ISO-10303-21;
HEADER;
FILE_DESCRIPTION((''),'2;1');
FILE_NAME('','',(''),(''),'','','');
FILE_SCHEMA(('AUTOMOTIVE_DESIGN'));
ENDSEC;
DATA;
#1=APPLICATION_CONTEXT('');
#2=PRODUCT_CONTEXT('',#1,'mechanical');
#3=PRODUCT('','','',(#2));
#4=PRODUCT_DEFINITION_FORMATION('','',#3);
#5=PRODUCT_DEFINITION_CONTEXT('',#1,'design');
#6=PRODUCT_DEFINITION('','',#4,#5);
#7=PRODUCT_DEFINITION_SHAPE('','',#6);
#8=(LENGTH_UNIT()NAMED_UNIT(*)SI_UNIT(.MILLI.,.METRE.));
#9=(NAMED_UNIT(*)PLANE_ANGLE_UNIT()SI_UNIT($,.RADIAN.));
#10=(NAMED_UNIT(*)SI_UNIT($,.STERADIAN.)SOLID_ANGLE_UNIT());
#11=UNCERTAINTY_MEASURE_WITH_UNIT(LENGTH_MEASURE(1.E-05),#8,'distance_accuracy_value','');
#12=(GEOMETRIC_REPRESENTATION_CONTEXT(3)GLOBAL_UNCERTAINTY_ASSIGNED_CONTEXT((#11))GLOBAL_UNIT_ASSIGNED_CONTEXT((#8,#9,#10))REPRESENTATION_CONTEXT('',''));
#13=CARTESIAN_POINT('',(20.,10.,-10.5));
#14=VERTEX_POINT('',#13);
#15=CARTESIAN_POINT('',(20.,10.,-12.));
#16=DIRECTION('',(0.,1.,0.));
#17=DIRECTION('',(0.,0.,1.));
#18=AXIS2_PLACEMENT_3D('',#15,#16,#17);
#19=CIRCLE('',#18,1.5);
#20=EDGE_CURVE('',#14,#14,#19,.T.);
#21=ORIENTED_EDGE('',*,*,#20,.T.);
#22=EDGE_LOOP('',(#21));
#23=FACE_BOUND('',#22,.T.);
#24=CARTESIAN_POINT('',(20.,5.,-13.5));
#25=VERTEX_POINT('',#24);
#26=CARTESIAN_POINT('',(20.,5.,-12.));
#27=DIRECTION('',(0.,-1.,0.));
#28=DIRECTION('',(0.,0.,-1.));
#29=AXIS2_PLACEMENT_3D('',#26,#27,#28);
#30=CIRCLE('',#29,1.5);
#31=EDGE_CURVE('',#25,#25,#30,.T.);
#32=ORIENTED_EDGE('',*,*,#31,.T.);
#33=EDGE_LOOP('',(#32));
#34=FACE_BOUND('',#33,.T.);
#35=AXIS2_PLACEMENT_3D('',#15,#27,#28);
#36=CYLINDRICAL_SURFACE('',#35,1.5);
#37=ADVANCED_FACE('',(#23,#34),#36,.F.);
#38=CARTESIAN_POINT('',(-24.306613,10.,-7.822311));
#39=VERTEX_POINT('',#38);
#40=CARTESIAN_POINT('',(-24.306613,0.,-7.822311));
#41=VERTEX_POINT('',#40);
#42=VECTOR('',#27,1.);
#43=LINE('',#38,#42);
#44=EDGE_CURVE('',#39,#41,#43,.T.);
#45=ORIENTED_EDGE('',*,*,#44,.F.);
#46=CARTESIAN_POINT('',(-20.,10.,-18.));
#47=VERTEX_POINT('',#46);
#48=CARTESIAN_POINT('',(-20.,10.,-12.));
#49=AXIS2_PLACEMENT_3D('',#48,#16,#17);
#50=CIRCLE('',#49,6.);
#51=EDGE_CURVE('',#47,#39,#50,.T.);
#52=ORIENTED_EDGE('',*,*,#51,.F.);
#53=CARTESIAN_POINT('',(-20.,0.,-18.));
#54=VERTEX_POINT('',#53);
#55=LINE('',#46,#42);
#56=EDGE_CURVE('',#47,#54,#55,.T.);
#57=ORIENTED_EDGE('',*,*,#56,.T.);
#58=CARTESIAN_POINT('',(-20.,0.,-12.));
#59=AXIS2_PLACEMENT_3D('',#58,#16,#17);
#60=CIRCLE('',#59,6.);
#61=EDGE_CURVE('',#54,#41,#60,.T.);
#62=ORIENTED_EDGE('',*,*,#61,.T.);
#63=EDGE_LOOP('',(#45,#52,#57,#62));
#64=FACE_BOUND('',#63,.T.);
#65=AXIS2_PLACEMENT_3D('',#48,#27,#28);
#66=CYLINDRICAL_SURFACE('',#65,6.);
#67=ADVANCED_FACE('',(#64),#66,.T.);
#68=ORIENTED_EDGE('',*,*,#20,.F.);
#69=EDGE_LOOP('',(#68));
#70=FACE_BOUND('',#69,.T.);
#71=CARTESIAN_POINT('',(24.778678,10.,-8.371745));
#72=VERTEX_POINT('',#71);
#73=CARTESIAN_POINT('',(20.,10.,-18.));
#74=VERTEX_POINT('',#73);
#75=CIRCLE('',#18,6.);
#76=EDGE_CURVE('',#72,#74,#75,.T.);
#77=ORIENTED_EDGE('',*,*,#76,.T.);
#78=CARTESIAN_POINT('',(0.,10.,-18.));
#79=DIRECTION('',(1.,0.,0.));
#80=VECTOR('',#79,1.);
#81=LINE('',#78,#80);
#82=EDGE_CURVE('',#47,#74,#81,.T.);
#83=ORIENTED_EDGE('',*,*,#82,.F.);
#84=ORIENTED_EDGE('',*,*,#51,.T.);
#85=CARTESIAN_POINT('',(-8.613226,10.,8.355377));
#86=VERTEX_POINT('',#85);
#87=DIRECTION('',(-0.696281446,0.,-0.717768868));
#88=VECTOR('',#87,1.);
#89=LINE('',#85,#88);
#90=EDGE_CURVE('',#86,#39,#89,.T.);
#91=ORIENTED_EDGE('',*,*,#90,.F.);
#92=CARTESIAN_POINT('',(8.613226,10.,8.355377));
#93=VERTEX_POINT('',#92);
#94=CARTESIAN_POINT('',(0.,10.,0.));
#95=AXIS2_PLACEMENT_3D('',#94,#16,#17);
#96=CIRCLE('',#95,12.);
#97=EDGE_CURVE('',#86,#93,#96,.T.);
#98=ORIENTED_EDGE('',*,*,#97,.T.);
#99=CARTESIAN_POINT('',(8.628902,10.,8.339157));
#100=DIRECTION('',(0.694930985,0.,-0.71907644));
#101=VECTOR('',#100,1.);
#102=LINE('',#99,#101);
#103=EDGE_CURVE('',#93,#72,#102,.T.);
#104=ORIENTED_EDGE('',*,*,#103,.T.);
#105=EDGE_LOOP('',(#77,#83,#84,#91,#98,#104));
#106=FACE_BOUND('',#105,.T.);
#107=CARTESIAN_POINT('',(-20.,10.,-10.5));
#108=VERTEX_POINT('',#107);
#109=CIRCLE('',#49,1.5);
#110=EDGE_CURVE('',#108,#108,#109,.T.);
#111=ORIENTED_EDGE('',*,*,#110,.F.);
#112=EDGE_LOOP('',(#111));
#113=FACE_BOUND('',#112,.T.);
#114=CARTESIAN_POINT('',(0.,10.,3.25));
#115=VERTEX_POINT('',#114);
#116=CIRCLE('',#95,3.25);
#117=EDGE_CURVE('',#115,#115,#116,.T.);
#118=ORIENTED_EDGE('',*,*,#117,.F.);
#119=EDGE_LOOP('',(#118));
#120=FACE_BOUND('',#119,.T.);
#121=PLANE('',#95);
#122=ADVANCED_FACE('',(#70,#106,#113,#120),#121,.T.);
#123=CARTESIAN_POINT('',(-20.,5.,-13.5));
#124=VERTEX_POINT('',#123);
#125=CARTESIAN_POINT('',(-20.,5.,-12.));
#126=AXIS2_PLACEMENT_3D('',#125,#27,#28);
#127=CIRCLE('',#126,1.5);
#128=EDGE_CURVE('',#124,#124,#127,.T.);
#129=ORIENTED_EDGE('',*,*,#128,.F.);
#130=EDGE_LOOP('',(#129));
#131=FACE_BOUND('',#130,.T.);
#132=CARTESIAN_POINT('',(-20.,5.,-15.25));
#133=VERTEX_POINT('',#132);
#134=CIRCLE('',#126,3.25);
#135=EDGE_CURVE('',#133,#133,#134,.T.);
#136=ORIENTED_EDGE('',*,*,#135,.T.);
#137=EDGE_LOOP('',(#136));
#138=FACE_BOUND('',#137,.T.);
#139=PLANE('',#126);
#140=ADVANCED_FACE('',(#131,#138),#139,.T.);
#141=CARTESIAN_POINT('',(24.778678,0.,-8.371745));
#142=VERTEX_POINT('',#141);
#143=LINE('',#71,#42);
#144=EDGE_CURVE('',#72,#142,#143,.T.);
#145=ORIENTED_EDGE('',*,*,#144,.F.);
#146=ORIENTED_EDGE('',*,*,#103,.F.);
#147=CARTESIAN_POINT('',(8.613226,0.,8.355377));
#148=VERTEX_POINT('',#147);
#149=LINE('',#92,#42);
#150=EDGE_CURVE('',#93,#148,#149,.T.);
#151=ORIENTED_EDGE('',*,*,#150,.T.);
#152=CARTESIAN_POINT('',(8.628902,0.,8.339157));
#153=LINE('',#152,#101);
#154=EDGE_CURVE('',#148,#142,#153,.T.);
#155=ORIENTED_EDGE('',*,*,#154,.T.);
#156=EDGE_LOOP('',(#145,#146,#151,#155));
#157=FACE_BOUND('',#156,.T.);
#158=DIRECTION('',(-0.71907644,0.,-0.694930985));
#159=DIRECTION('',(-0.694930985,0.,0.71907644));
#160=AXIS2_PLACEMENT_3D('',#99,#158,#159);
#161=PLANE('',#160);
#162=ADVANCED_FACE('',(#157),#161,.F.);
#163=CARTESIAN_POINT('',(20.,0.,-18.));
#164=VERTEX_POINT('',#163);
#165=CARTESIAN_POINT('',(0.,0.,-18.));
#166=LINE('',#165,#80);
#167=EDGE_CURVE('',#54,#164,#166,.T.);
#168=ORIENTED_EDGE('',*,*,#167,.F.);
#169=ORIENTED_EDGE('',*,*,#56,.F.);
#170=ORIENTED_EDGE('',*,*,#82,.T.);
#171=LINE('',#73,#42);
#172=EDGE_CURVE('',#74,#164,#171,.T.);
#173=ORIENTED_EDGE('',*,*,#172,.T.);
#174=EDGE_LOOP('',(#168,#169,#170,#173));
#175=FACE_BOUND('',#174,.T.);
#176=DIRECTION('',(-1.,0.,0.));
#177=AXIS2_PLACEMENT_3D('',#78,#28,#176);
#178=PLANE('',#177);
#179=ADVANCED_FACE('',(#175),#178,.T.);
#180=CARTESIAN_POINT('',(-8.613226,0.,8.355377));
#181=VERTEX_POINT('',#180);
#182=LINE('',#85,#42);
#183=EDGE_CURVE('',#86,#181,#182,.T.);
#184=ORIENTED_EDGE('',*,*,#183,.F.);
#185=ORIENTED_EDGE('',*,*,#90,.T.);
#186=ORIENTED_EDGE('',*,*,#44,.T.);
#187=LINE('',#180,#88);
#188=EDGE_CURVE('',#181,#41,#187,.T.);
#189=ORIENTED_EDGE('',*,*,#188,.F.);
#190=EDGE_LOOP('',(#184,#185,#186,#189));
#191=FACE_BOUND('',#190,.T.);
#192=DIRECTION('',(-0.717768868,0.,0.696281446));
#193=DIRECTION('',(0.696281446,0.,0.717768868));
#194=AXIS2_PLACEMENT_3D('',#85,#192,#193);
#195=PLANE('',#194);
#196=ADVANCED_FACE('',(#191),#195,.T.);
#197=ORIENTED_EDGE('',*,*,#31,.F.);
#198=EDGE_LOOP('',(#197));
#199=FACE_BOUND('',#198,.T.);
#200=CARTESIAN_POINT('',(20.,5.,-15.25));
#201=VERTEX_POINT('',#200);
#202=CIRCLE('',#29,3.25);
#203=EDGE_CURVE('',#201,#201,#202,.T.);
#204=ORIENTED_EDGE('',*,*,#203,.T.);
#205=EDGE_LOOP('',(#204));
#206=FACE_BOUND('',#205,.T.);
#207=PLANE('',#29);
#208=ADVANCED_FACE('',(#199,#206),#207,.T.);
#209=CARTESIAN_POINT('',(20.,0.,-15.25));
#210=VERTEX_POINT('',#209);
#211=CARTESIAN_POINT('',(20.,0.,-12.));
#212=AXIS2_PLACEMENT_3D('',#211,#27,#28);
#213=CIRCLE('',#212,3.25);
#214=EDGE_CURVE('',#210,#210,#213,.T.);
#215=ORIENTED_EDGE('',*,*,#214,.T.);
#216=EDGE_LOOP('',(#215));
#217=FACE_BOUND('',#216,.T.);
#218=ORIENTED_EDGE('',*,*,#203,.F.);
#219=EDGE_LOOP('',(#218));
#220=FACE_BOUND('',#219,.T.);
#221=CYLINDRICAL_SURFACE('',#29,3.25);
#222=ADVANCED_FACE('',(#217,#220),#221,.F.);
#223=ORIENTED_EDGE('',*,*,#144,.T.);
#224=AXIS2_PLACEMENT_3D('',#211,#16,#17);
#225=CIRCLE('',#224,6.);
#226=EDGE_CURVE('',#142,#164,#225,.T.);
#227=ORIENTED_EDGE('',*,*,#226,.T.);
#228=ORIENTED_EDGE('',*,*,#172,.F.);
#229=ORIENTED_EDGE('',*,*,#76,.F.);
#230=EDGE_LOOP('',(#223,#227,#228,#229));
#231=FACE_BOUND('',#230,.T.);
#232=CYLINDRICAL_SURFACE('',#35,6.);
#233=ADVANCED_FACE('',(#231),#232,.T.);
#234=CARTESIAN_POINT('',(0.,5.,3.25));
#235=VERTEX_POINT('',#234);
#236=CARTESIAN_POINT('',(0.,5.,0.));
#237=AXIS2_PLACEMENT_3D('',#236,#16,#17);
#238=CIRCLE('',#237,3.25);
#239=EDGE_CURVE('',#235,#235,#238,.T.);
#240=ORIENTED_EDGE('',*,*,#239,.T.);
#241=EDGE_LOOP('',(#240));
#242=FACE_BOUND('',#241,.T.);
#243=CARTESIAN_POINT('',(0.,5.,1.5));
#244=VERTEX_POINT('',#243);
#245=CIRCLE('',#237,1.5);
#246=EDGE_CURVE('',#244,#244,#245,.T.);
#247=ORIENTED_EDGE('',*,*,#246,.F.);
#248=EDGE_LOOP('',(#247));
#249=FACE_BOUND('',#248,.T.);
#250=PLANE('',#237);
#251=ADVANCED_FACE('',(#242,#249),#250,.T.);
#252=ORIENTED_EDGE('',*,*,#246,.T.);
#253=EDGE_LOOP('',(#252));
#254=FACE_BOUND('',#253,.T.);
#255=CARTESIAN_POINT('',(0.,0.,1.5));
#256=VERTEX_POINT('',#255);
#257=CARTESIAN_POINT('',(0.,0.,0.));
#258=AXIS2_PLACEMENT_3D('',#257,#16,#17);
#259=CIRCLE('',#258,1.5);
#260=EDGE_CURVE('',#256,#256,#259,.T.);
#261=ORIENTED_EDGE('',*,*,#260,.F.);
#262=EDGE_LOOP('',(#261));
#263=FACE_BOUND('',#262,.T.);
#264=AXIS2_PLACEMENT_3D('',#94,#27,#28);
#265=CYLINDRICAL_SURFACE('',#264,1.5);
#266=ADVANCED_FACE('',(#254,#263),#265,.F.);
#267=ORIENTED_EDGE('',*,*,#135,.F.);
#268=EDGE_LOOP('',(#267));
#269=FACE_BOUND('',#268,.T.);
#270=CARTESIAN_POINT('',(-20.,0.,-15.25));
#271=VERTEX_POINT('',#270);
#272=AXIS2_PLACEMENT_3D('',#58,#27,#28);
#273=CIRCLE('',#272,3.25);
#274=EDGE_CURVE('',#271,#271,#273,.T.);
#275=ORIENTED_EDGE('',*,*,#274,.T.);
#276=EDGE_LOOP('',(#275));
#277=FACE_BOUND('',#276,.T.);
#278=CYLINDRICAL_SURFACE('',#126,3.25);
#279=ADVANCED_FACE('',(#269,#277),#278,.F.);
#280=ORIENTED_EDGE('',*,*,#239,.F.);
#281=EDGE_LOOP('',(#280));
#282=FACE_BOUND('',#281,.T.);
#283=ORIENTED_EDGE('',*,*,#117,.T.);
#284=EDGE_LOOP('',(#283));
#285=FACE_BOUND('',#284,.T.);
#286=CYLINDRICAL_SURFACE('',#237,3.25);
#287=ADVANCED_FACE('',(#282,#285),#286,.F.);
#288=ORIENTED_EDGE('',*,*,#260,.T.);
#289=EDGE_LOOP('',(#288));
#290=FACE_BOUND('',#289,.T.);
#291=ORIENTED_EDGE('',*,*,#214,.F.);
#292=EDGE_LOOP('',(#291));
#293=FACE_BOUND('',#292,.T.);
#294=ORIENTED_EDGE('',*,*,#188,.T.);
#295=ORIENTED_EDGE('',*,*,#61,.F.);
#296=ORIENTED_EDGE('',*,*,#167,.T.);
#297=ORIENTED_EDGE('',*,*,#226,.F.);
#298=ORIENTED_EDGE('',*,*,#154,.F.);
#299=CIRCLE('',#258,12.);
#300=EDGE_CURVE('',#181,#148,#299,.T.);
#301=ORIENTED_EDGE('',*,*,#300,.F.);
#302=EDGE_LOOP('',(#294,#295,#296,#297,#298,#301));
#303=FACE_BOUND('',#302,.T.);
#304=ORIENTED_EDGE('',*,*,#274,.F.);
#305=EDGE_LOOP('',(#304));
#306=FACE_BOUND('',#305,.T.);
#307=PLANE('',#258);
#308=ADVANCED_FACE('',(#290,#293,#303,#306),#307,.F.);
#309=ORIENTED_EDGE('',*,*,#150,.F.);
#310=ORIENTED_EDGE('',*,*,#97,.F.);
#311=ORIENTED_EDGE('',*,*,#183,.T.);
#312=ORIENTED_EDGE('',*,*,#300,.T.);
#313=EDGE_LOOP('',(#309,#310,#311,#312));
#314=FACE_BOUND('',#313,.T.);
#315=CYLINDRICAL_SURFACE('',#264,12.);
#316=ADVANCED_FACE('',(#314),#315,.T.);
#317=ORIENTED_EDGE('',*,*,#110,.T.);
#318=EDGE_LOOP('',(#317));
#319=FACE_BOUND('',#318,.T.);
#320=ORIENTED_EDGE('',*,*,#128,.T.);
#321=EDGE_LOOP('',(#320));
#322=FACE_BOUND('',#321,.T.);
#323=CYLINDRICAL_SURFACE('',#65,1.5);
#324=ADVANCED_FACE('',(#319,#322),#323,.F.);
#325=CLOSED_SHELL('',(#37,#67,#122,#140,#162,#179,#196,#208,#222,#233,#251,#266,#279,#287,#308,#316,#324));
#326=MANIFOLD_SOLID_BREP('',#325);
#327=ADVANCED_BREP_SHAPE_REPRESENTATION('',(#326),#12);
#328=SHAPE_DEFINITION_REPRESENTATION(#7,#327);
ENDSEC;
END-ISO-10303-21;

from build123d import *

# Parameters (mm, degrees)
BOSS_EXTRUDE1_OUTLINE_R = 1.5
BOSS_EXTRUDE1_DEPTH     = 10
SKETCH3_R               = 3.25
CUT_EXTRUDE1_DEPTH      = 5
SKETCH4_R               = 3.25
CUT_EXTRUDE2_DEPTH      = 5


# Read off the part's stored shape, not the designer's step: Boss-Extrude1
with BuildPart() as part:
    # Boss-Extrude1 outline → Boss-Extrude1 (new body)
    with BuildSketch(Plane(origin=(0, 0, 0), x_dir=(1, 0, 0), z_dir=(0, 1, 0))):
        with BuildLine():
            ThreePointArc((-20, 18), (-25.525673356, 14.33814755), (-24.306613207, 7.822311322))
            Line((-24.306613207, 7.822311322), (-8.613226413, -8.355377356))
            ThreePointArc((-8.613226413, -8.355377356), (0, -12), (8.613226413, -8.355377356))
            Line((8.613226413, -8.355377356), (24.778677898, 8.371744559))
            ThreePointArc((24.778677898, 8.371744559), (25.374454979, 14.667439536), (20, 18))
            Line((20, 18), (-20, 18))
        make_face()
        Circle(BOSS_EXTRUDE1_OUTLINE_R, mode=Mode.SUBTRACT)
        with Locations((-20, 12)):
            Circle(BOSS_EXTRUDE1_OUTLINE_R, mode=Mode.SUBTRACT)
        with Locations((20, 12)):
            Circle(BOSS_EXTRUDE1_OUTLINE_R, mode=Mode.SUBTRACT)
    extrude(amount=BOSS_EXTRUDE1_DEPTH)

    # Sketch3 → Cut-Extrude1 (cut)
    with BuildSketch(Plane(origin=(0, 10, 0), x_dir=(1, 0, 0), z_dir=(0, 1, 0))):
        with Locations(Location((0, 0, 0), (0, 0, 270))):
            Circle(SKETCH3_R)
    extrude(amount=-CUT_EXTRUDE1_DEPTH, mode=Mode.SUBTRACT)

    # Sketch4 → Cut-Extrude2 (cut)
    with BuildSketch(Plane.XZ):
        with Locations(Location((20, -12, 0), (0, 0, 270))):
            Circle(SKETCH4_R)
        with Locations(Location((-20, -12, 0), (0, 0, 270))):
            Circle(SKETCH4_R)
    extrude(amount=-CUT_EXTRUDE2_DEPTH, mode=Mode.SUBTRACT)


solid = part.part
